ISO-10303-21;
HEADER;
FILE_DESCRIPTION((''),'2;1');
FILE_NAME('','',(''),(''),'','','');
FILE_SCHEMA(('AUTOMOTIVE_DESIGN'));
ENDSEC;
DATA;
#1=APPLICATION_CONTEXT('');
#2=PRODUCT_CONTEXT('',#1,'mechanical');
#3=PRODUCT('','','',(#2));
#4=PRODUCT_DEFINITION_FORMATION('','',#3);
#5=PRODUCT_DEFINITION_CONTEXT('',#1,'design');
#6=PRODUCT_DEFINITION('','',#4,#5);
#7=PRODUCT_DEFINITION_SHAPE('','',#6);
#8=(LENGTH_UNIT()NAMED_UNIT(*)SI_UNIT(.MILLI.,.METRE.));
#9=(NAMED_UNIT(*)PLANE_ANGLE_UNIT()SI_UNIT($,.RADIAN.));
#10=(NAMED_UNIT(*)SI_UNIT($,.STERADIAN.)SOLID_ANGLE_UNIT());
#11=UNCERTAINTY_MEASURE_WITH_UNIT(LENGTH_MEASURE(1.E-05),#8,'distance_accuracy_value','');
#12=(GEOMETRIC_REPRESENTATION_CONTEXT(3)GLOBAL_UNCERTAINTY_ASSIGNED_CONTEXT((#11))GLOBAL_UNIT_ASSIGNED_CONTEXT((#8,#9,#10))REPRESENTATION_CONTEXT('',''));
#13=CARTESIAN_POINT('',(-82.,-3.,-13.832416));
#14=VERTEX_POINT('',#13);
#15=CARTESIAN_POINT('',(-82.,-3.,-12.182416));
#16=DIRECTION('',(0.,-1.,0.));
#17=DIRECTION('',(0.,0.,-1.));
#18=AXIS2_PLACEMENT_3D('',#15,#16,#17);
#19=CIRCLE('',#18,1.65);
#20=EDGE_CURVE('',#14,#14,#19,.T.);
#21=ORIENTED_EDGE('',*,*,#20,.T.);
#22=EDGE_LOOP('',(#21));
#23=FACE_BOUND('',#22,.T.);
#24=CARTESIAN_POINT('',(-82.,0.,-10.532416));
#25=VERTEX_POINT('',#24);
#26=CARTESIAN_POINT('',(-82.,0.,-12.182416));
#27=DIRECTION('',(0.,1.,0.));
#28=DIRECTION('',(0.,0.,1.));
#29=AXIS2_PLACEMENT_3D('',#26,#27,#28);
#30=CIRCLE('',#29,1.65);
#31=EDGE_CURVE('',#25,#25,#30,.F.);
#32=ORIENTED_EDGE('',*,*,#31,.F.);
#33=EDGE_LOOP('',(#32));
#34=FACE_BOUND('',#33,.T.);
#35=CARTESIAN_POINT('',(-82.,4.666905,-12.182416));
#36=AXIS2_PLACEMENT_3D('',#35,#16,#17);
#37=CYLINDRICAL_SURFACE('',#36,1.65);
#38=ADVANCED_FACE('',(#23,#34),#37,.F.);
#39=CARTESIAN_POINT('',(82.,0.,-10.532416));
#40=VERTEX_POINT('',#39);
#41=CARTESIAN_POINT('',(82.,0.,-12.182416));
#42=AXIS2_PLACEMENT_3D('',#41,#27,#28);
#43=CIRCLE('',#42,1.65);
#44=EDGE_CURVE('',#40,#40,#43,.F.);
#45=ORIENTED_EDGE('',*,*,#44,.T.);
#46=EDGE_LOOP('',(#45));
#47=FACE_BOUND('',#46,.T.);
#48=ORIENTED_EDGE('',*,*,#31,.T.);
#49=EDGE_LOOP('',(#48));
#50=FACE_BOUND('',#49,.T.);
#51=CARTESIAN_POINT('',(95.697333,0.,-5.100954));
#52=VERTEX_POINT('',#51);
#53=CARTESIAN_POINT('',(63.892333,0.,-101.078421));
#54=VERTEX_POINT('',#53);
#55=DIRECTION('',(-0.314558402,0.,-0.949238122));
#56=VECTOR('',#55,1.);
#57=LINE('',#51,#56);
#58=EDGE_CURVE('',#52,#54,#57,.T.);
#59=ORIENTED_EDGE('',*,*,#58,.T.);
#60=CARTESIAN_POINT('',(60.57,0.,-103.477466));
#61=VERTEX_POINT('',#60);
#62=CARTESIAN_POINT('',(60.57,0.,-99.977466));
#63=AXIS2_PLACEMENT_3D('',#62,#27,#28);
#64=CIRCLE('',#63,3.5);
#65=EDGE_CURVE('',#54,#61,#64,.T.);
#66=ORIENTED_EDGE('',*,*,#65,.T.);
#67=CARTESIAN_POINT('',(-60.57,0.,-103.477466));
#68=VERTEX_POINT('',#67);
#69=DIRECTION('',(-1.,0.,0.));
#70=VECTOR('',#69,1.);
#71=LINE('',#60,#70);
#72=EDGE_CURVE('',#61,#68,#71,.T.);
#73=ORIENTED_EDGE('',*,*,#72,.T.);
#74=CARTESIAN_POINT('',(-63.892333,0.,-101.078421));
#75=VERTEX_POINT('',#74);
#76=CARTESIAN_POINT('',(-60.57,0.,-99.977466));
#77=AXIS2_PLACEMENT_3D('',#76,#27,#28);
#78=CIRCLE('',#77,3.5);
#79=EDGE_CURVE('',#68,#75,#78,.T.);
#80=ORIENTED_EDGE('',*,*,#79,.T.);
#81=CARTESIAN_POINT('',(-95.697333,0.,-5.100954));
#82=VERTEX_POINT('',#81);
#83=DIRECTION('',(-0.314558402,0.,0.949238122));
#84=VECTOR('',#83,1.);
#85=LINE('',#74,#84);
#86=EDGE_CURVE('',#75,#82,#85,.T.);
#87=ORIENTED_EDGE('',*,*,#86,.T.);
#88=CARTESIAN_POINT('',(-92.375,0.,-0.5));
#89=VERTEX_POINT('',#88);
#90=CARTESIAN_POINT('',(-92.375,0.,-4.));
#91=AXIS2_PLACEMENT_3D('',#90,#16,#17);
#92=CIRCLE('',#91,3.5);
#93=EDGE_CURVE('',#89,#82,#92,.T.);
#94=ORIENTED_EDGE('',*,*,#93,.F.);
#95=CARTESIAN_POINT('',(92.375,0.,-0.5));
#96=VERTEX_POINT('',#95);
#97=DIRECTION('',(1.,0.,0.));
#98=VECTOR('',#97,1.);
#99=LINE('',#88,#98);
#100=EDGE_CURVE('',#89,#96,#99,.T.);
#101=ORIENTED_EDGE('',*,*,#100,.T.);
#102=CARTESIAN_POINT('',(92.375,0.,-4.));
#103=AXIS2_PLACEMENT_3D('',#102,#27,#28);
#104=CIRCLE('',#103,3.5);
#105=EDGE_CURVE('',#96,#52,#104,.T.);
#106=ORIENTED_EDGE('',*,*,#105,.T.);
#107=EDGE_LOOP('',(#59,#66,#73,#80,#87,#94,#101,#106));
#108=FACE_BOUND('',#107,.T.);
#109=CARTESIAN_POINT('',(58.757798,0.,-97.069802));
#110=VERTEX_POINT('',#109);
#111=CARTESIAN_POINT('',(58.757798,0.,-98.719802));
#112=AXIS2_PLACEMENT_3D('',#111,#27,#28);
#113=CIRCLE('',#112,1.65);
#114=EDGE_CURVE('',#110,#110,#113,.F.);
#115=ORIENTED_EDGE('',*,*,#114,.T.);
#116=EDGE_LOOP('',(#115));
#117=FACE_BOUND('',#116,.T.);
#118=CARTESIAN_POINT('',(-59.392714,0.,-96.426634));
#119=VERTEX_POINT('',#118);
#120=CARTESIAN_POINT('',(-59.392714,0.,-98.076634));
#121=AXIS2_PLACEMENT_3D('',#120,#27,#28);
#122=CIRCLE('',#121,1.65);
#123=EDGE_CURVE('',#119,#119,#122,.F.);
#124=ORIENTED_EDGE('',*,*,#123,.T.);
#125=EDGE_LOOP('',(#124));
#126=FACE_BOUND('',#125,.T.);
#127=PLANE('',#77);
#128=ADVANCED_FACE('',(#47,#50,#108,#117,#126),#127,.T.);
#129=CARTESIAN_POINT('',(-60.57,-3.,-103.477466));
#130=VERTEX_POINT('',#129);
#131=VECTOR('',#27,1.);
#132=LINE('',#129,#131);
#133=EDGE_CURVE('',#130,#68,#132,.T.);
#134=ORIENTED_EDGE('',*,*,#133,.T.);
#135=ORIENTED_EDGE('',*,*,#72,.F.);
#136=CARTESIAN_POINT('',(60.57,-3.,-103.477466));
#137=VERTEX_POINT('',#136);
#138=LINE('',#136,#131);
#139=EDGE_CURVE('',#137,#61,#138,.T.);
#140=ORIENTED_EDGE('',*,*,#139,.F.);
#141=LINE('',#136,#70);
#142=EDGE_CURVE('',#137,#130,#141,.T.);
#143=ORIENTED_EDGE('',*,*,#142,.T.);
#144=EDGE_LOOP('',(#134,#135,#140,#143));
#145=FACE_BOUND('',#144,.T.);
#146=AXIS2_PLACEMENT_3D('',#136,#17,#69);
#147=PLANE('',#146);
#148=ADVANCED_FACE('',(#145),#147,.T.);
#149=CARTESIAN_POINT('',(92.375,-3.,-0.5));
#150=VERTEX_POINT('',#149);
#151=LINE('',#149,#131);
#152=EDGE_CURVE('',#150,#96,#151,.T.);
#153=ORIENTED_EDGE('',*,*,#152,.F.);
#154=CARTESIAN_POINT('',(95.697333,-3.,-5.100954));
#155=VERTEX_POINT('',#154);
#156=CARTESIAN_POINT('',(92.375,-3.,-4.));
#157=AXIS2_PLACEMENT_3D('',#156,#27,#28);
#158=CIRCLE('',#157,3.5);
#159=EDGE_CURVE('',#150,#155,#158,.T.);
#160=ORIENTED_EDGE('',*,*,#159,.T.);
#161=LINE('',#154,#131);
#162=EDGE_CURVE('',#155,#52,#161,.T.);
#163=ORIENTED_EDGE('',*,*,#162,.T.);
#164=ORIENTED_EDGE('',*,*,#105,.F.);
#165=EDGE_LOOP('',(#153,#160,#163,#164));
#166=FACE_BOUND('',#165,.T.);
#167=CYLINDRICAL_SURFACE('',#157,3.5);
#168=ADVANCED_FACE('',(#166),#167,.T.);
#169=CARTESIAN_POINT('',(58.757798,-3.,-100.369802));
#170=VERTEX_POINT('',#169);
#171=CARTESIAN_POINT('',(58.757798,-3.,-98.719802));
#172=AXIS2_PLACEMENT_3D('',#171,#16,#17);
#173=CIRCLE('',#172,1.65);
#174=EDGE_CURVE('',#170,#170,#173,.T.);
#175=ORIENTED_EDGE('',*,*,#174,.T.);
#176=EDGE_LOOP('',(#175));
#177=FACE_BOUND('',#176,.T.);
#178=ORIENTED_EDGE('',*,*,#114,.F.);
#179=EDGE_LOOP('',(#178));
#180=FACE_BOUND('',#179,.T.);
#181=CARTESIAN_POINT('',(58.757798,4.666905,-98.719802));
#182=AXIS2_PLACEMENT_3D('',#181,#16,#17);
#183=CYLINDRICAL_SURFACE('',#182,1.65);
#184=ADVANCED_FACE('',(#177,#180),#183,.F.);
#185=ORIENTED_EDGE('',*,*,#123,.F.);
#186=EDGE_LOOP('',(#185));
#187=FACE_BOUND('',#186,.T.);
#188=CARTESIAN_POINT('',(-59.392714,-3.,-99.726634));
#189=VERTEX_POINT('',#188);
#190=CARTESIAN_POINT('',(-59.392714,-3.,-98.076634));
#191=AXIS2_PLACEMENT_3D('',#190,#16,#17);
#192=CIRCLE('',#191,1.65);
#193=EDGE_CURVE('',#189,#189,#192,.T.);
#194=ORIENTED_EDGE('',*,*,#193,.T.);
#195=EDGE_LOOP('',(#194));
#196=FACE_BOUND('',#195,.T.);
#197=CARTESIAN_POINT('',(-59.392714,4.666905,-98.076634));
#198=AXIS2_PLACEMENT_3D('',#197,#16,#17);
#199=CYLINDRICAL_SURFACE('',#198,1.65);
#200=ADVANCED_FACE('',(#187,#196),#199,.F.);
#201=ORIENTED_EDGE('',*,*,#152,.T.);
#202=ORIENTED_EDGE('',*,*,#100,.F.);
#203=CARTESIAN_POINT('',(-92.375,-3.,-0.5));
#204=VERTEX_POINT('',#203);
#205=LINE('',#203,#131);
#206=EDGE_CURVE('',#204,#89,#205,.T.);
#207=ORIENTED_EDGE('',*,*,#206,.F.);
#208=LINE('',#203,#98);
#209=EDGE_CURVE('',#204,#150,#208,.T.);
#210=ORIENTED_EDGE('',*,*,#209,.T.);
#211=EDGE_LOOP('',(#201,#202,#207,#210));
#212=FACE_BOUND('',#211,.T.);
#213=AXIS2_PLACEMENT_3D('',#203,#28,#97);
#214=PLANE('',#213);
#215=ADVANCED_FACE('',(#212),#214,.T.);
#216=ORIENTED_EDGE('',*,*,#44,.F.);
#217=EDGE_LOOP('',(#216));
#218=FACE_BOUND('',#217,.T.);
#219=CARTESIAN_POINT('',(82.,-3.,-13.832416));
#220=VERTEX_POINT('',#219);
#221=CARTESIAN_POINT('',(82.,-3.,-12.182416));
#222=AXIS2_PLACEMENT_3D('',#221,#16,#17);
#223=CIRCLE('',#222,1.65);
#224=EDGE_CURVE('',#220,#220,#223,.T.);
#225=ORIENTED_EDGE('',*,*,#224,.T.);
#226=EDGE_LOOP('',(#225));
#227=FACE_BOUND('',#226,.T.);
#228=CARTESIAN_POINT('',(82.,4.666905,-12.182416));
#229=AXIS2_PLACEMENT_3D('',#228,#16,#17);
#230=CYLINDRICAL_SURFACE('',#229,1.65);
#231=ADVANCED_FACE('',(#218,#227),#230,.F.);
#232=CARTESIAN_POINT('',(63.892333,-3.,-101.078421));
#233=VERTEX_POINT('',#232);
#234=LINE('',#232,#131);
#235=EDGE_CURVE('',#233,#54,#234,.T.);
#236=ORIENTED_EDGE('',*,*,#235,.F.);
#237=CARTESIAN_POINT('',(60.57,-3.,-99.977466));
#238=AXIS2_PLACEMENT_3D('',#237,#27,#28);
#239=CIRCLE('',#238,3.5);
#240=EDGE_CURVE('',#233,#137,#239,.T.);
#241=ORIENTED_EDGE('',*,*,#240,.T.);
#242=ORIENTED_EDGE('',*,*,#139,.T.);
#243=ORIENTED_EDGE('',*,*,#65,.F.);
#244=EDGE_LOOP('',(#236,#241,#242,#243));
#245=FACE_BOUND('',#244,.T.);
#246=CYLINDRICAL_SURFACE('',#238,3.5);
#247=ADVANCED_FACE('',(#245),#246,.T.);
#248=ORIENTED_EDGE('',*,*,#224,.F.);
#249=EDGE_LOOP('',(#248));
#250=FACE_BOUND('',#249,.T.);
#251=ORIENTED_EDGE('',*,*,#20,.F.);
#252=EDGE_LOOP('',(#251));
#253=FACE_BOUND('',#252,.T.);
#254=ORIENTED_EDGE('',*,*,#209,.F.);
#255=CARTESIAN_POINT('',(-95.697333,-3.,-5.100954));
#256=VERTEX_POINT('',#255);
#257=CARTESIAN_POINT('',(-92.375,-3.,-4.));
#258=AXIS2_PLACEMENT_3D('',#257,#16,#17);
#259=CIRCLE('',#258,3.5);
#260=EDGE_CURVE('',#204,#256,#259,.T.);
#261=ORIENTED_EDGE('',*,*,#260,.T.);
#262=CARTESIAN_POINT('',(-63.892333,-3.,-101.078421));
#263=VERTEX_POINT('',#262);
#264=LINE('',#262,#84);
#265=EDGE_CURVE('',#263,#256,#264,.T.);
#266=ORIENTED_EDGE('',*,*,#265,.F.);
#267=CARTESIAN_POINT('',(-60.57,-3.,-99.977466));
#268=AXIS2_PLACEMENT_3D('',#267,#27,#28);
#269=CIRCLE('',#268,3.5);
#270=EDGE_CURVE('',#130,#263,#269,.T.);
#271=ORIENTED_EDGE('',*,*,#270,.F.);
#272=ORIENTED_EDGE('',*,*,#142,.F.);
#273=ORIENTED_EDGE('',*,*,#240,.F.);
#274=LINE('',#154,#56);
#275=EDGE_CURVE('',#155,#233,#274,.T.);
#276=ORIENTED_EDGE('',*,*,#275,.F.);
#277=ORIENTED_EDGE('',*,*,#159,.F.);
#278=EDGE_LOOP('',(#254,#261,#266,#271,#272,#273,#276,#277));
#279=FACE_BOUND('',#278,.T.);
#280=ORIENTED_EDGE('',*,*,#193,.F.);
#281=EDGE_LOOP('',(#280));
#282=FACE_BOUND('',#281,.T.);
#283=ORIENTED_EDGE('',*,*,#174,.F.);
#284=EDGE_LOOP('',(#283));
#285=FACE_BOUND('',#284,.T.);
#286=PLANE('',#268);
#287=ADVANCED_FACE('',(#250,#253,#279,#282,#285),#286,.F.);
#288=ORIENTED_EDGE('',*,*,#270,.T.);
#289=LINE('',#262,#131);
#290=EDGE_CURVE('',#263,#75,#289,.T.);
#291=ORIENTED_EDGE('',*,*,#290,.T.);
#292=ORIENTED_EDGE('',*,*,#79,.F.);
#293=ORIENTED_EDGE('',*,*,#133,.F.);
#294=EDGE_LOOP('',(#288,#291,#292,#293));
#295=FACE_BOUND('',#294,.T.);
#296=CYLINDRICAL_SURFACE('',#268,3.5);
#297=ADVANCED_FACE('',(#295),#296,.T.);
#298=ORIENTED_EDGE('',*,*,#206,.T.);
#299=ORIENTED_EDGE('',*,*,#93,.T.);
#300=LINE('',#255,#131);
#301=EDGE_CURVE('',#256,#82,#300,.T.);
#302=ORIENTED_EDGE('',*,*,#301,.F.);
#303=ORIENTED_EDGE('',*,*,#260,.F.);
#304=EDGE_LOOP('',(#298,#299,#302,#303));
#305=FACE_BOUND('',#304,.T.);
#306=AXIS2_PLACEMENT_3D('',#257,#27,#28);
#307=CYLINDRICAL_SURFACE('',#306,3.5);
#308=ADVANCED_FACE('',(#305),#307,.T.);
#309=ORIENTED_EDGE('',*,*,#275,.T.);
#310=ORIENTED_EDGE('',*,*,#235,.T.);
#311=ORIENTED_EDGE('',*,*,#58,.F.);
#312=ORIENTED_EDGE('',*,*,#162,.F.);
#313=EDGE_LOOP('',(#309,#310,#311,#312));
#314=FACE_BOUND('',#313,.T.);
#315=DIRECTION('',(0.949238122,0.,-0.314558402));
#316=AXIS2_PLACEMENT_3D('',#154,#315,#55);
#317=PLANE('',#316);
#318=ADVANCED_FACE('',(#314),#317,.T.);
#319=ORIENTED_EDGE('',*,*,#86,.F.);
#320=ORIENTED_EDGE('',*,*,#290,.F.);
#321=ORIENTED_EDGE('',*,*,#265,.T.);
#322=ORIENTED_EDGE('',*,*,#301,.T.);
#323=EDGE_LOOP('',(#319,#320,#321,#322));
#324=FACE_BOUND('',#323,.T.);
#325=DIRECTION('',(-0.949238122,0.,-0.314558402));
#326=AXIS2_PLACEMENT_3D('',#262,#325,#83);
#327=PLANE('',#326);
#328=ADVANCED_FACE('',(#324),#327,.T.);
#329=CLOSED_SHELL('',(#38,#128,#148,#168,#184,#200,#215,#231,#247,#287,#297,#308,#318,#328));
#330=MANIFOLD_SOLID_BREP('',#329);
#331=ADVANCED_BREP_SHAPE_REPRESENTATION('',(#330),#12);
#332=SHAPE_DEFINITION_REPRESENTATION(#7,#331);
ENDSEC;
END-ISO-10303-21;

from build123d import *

# Parameters (mm, degrees)
BASE_FLANGE1_DEPTH = 3
SKETCH23_R         = 1.65
CUT_EXTRUDE3_DEPTH = 3


# Sheet-metal steps are written as plain solids
with BuildPart() as part:
    # Sketch1 → Base-Flange1 (new body)
    with BuildSketch(Plane(origin=(0, 0, 0), x_dir=(1, 0, 0), z_dir=(0, 1, 0))):
        with BuildLine():
            Line((-63.892333426, 101.078420902), (-95.697333426, 5.100954406))
            ThreePointArc((-95.697333426, 5.100954406), (-95.212546513, 1.951017377), (-92.375, 0.5))
            Line((-92.375, 0.5), (92.375, 0.5))
            ThreePointArc((92.375, 0.5), (95.212546513, 1.951017377), (95.697333426, 5.100954406))
            Line((95.697333426, 5.100954406), (63.892333426, 101.078420902))
            ThreePointArc((63.892333426, 101.078420902), (62.618982623, 102.815013009), (60.57, 103.477466496))
            Line((60.57, 103.477466496), (-60.57, 103.477466496))
            ThreePointArc((-60.57, 103.477466496), (-62.618982623, 102.815013009), (-63.892333426, 101.078420902))
        make_face()
    extrude(amount=-BASE_FLANGE1_DEPTH)

    # Sketch23 → Cut-Extrude3 (cut)
    with BuildSketch(Plane.XZ.offset(3)):
        with Locations(Location((-82, -12.182416465, 0), (0, 0, 270))):
            Circle(SKETCH23_R)
        with Locations(Location((82, -12.182416465, 0), (0, 0, 270))):
            Circle(SKETCH23_R)
        with Locations(Location((58.757797989, -98.719801772, 0), (0, 0, 270))):
            Circle(SKETCH23_R)
        with Locations(Location((-59.392713729, -98.076633575, 0), (0, 0, 270))):
            Circle(SKETCH23_R)
    extrude(amount=-CUT_EXTRUDE3_DEPTH, mode=Mode.SUBTRACT)


solid = part.part
